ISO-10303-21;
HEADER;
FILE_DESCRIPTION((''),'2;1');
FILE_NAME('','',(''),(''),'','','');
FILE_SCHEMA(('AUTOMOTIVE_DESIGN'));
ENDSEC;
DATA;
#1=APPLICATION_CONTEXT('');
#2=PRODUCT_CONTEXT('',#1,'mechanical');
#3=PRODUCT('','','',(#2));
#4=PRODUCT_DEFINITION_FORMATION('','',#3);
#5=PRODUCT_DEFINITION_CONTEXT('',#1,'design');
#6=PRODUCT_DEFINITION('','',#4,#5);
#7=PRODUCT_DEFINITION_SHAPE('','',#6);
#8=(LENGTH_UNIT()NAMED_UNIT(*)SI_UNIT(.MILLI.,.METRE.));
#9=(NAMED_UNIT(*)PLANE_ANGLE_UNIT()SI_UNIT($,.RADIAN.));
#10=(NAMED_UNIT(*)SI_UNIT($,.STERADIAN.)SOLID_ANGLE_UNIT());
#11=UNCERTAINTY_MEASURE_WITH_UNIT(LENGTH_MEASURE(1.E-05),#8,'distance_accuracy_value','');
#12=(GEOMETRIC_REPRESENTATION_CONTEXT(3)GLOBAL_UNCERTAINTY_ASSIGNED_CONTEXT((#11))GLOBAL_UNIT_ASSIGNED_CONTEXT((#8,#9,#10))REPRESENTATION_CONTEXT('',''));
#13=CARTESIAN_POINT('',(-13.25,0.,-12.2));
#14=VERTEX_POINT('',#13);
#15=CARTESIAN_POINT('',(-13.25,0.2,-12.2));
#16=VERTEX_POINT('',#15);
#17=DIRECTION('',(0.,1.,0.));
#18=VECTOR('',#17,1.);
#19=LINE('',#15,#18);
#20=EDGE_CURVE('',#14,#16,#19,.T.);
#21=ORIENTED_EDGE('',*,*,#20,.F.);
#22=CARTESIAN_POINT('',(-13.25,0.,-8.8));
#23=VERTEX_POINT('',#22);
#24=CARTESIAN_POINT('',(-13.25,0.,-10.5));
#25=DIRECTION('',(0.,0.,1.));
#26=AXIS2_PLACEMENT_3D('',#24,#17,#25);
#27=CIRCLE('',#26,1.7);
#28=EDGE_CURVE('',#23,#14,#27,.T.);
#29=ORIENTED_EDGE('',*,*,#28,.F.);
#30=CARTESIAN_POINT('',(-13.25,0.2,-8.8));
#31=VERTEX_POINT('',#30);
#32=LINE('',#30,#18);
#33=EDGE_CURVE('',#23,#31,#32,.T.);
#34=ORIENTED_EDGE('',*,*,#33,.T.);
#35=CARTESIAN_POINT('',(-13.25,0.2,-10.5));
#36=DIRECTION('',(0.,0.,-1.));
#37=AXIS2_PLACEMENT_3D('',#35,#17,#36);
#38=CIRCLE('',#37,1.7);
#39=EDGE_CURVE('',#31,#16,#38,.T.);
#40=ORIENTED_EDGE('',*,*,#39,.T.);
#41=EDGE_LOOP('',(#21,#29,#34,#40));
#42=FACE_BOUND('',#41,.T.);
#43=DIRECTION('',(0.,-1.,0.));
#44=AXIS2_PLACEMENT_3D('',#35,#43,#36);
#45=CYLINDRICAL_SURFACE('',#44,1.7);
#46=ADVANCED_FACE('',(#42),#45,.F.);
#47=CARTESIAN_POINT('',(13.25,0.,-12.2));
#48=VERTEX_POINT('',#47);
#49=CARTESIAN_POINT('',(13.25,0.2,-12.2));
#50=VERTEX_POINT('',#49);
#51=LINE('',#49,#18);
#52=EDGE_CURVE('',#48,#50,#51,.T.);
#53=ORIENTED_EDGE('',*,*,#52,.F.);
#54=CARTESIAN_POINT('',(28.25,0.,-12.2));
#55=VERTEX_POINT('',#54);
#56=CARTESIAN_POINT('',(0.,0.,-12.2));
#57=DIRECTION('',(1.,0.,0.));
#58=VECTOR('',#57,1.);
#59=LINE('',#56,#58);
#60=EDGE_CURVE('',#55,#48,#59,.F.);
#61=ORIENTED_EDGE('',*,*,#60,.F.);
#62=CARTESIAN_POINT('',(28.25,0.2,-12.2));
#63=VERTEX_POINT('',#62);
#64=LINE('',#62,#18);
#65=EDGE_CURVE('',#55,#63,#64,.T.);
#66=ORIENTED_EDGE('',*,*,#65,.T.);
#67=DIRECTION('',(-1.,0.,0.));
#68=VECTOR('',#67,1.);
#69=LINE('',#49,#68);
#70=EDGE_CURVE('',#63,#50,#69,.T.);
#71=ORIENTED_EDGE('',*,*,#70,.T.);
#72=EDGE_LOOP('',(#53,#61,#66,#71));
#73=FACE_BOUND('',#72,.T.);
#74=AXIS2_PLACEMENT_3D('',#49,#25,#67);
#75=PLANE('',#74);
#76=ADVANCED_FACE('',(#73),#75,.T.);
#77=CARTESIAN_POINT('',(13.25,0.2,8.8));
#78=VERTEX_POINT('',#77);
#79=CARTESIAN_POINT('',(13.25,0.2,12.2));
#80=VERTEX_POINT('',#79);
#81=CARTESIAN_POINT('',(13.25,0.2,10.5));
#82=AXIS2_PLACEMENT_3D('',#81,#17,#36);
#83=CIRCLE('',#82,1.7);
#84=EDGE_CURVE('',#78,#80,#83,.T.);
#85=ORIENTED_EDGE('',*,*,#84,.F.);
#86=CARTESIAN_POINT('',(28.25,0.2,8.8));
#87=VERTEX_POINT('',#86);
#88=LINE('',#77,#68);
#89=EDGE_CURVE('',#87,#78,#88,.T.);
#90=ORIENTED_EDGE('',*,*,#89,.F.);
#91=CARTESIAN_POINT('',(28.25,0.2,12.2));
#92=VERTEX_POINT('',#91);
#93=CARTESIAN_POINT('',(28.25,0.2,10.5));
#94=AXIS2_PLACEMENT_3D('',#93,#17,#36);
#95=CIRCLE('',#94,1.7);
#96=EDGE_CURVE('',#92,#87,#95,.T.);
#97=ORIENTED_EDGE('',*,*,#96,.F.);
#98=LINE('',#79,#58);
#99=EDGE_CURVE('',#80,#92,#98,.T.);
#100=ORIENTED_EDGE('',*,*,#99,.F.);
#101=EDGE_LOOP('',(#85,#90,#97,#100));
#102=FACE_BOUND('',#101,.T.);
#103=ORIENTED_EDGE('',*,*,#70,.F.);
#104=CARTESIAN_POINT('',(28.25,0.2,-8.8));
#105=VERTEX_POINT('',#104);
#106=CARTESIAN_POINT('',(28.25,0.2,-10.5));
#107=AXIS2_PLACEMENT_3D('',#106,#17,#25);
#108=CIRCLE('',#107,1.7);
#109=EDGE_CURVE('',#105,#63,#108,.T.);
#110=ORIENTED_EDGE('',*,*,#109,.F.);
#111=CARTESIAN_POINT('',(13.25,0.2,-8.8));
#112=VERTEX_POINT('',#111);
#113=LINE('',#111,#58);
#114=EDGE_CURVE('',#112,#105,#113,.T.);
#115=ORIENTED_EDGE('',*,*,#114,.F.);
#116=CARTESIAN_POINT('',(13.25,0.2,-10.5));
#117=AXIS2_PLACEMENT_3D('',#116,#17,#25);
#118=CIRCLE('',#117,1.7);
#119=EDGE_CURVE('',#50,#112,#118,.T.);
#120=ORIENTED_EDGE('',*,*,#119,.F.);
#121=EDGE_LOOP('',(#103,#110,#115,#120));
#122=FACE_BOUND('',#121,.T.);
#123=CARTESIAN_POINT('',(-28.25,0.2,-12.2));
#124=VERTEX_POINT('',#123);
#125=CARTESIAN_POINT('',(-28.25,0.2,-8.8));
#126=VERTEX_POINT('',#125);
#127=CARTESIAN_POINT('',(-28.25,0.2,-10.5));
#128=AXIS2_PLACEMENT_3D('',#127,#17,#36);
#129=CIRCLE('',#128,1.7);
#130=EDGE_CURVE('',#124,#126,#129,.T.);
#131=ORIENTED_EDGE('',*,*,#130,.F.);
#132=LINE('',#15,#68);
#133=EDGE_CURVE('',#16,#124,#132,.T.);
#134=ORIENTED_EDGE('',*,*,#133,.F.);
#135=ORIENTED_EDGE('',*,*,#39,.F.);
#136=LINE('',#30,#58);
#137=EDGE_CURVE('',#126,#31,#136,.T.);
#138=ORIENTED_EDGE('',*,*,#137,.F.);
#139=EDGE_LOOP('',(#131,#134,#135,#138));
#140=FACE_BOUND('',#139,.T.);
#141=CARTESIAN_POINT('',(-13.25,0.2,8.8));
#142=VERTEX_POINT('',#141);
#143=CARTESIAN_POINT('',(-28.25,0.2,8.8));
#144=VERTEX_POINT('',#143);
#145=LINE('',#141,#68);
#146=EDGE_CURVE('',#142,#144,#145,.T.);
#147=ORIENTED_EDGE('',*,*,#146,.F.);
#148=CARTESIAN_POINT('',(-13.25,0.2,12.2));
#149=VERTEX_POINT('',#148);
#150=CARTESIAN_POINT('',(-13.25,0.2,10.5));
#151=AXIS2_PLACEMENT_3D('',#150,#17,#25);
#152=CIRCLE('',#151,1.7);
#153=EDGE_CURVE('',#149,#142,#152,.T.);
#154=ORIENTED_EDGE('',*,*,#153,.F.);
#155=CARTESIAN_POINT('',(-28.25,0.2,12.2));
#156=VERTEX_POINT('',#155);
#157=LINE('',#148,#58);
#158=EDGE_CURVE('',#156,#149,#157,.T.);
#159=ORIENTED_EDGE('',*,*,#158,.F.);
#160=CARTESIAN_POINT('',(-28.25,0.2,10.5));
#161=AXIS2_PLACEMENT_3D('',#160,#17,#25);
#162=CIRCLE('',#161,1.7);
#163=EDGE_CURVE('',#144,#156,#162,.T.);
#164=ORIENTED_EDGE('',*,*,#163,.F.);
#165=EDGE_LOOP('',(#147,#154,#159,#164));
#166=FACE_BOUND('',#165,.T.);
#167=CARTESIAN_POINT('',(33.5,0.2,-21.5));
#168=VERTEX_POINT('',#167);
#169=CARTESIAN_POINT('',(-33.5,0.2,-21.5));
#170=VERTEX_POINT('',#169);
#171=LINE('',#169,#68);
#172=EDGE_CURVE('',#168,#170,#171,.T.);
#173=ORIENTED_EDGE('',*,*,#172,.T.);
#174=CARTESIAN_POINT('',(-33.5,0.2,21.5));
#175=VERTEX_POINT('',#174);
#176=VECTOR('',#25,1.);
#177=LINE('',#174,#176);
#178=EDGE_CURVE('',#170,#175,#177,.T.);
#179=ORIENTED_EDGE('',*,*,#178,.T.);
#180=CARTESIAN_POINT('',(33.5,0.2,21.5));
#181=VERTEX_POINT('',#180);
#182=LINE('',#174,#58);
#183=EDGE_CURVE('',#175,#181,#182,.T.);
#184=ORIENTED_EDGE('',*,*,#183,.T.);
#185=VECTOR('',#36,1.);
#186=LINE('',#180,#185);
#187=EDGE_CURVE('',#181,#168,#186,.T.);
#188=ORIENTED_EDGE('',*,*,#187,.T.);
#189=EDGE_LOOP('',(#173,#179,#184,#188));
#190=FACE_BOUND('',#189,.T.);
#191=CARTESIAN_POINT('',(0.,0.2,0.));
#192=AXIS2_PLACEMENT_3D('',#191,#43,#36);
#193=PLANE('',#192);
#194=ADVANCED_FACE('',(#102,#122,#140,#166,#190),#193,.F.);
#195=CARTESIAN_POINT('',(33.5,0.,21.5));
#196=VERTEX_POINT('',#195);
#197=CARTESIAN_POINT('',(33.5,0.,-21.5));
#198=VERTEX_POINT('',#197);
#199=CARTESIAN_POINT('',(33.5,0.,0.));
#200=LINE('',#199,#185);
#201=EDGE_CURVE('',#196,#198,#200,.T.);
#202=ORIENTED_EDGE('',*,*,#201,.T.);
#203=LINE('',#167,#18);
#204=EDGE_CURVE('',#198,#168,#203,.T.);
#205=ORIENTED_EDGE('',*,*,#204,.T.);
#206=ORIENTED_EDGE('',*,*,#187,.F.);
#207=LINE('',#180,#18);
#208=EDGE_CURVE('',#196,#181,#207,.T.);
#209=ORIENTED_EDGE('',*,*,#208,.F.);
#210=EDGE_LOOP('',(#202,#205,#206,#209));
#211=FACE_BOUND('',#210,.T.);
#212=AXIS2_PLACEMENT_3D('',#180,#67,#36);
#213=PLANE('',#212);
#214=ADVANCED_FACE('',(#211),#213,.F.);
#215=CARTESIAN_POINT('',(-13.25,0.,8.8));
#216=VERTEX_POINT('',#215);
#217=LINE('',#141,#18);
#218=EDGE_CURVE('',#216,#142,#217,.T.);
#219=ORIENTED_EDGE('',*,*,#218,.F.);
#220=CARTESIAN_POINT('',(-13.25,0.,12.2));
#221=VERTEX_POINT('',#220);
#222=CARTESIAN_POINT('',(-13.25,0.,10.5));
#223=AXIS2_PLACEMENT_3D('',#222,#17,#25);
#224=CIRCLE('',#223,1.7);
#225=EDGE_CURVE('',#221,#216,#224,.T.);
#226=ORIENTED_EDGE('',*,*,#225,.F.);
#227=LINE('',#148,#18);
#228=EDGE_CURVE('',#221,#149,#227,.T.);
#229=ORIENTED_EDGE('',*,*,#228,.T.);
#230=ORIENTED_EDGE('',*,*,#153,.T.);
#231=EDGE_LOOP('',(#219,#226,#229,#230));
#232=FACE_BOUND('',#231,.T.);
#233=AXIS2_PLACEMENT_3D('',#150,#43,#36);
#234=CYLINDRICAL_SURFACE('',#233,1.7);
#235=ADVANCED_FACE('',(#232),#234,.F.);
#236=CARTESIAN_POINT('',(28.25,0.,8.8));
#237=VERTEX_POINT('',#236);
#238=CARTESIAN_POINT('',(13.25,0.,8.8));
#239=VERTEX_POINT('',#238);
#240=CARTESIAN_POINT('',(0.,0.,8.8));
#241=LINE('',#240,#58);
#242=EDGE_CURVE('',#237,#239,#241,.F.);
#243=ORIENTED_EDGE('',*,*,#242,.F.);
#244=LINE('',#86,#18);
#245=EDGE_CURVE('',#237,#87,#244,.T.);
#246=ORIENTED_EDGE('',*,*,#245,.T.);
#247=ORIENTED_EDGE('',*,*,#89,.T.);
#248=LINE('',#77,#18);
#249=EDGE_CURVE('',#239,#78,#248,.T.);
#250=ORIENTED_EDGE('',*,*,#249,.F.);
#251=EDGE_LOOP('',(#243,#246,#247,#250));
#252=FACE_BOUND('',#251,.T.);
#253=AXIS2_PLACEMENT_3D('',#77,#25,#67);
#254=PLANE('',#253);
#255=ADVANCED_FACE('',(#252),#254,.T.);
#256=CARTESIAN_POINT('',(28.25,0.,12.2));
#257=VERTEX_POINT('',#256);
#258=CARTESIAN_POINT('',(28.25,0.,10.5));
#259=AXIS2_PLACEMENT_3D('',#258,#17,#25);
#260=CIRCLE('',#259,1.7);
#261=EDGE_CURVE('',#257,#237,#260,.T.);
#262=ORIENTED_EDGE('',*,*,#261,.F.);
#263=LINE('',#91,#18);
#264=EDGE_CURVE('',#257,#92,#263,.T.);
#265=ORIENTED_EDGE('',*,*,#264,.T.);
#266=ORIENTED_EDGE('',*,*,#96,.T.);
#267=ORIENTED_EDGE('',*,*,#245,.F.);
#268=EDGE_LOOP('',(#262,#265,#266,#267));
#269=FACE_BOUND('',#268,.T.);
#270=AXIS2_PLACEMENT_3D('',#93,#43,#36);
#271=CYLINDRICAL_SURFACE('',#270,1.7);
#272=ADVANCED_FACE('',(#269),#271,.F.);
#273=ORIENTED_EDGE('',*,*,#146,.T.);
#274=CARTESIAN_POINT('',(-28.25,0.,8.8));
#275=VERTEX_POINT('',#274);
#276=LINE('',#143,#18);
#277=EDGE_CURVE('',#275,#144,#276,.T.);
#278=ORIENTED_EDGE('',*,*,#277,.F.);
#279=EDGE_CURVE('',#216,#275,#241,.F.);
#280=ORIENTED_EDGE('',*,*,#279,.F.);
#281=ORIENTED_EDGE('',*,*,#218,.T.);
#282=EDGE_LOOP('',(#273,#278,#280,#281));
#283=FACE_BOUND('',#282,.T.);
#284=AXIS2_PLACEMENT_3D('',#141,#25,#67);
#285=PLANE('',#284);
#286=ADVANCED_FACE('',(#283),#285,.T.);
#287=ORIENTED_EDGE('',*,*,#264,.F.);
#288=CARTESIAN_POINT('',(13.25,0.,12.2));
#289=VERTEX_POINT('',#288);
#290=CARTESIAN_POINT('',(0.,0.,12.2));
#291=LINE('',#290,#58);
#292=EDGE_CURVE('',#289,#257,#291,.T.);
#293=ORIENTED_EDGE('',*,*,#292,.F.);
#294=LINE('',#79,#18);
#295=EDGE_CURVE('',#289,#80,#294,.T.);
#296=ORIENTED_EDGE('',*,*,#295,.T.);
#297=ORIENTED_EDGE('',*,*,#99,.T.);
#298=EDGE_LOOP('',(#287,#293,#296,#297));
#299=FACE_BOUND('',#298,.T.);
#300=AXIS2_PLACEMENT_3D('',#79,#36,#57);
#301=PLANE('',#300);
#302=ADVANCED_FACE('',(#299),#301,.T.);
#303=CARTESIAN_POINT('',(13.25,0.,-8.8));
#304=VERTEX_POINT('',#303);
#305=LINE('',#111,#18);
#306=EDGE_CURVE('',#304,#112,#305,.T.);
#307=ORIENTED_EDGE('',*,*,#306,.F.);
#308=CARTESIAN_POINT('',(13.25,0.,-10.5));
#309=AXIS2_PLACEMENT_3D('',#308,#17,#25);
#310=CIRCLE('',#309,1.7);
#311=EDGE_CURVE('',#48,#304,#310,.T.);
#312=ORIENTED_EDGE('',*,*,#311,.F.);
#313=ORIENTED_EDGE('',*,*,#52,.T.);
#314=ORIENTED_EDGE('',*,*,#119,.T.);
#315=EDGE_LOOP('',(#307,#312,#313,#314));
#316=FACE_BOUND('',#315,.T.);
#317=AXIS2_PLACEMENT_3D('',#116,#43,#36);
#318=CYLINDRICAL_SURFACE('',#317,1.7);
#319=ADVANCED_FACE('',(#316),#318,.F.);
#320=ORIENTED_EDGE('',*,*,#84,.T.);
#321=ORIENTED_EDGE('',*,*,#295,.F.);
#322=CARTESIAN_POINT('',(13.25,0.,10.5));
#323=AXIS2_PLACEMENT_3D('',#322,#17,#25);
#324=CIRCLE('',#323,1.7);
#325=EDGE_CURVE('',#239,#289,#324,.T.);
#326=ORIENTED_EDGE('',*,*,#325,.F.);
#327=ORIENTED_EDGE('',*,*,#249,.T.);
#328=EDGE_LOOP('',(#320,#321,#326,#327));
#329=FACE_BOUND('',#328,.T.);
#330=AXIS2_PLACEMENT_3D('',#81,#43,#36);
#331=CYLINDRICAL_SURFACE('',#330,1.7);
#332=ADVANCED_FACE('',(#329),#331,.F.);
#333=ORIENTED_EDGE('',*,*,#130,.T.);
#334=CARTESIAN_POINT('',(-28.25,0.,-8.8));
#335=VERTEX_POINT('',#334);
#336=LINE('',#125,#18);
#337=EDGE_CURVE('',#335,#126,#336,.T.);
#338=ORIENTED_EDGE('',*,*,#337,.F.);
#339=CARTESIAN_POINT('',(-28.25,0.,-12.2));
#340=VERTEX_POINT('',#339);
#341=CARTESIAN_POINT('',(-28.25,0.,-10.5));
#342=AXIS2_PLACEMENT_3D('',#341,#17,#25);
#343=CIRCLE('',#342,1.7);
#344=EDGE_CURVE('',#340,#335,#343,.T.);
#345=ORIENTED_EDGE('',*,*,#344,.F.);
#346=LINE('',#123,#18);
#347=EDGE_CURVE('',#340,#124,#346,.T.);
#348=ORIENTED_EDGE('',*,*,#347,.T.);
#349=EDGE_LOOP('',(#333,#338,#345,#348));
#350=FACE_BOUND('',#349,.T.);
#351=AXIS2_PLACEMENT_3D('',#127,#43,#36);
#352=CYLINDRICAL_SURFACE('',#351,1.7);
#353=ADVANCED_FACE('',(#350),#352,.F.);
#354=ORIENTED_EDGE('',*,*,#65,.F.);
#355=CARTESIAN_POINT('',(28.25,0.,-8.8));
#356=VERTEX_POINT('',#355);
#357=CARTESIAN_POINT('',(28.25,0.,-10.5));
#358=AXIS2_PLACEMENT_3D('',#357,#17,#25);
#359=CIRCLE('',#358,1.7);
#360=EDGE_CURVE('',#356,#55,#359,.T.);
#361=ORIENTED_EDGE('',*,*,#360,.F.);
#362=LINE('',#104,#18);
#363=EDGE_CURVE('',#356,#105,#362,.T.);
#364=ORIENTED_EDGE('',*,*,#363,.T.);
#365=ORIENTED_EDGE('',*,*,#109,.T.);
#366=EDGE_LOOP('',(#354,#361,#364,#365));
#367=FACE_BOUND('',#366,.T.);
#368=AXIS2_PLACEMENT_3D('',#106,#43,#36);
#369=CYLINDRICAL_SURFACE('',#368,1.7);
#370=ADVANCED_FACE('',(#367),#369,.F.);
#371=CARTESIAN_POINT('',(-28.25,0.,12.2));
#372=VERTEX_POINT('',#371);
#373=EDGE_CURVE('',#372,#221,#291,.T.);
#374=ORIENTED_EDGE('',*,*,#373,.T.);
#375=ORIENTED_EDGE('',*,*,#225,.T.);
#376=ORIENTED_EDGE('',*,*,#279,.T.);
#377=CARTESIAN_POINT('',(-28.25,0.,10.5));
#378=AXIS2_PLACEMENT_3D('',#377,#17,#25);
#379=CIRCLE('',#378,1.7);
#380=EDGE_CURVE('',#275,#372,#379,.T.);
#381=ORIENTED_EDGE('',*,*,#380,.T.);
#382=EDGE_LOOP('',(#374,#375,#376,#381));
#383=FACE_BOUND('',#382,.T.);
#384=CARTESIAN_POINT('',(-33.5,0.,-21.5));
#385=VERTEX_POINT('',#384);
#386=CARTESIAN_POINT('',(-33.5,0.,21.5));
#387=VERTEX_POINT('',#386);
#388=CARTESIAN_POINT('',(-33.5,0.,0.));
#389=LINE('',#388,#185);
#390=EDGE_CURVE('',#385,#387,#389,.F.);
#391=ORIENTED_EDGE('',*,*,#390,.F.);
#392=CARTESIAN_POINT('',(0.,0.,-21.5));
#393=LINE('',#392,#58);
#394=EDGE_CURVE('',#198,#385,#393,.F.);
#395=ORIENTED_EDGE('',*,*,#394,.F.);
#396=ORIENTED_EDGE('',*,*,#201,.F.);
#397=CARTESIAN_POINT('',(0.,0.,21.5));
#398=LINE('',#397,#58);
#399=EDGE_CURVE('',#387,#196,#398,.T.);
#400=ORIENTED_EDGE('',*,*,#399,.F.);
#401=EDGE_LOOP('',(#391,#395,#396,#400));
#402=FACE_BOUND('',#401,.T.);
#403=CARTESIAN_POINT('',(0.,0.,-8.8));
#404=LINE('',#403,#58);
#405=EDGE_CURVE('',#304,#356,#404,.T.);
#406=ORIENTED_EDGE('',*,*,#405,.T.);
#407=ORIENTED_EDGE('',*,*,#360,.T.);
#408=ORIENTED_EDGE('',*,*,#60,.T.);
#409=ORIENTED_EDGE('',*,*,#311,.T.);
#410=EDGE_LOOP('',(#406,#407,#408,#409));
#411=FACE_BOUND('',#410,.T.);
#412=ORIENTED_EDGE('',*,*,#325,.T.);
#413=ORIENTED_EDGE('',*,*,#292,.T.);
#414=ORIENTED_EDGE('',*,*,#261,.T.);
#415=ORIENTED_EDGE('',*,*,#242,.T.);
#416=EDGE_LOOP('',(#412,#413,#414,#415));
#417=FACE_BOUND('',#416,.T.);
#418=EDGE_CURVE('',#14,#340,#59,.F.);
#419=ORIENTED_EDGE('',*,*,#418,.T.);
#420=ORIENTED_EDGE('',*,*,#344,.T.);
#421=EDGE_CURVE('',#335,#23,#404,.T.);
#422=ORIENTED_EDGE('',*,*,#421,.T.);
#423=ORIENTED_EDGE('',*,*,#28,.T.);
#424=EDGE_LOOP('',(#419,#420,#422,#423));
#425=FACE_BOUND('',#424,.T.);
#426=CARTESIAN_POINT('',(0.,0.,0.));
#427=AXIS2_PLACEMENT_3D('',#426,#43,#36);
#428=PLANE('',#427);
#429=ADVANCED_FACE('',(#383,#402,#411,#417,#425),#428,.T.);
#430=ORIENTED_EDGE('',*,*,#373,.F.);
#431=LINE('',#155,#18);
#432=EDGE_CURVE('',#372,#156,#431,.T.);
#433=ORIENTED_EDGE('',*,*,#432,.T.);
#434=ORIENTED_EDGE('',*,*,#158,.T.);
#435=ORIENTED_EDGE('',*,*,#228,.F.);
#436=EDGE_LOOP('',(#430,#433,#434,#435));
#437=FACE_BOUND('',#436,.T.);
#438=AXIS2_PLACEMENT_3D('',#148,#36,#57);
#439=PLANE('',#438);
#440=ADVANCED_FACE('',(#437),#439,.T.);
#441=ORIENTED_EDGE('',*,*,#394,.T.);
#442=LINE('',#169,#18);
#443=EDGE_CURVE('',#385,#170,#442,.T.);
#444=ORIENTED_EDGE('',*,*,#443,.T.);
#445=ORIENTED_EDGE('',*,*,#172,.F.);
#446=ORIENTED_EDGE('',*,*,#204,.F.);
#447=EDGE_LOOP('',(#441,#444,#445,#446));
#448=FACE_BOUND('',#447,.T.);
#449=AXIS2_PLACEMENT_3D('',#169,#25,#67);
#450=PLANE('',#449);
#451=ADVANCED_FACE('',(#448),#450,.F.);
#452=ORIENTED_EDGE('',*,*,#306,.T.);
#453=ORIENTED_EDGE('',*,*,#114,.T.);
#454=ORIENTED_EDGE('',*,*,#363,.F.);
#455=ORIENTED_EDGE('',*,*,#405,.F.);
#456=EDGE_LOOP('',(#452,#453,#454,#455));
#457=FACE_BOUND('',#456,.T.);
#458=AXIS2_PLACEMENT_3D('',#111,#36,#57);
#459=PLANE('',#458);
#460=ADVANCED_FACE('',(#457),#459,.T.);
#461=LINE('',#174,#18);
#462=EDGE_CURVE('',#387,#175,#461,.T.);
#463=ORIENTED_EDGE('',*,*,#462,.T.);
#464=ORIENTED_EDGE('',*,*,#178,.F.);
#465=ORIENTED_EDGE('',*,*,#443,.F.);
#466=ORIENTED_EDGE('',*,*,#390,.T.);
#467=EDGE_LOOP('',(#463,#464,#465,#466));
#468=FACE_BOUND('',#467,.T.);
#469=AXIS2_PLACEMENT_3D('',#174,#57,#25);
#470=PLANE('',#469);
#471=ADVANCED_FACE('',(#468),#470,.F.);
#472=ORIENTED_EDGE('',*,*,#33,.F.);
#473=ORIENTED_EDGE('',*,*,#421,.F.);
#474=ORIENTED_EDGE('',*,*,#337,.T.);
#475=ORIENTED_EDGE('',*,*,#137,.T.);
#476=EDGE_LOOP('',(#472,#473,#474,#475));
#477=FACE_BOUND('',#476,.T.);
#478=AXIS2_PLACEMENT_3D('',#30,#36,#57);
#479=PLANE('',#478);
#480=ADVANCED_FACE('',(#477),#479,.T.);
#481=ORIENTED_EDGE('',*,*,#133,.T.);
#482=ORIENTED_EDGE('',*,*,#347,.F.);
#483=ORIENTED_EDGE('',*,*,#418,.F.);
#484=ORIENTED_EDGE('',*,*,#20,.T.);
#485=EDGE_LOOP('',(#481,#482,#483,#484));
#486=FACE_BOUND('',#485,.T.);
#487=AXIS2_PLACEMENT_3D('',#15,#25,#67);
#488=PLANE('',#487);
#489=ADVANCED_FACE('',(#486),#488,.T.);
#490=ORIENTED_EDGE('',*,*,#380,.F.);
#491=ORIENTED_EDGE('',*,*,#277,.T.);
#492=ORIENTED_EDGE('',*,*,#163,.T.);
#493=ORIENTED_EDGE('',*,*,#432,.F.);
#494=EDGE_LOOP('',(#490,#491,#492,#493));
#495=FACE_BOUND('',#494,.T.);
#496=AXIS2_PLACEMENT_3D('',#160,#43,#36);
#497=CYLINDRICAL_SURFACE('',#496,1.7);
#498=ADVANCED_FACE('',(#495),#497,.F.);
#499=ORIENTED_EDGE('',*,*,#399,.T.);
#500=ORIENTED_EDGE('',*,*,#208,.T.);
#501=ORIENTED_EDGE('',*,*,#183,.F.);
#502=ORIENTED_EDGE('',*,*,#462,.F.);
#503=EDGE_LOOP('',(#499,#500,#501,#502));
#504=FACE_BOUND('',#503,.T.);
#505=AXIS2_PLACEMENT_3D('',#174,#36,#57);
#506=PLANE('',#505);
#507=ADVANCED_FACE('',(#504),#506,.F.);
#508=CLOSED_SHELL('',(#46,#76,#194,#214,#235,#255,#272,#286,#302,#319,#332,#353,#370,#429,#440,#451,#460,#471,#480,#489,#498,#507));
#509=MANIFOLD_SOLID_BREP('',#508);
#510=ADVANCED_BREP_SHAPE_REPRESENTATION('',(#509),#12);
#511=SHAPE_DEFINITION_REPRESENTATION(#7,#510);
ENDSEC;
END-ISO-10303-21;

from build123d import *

# Parameters (mm, degrees)
SKETCH1_W           = 67
SKETCH1_H           = 43
BOSS_EXTRUDE1_DEPTH = 0.2


with BuildPart() as part:
    # Sketch1 → Boss-Extrude1 (new body)
    with BuildSketch(Plane(origin=(0, 0, 0), x_dir=(1, 0, 0), z_dir=(0, 1, 0))):
        Rectangle(SKETCH1_W, SKETCH1_H)
        with BuildLine():
            Line((13.25, 12.2), (28.25, 12.2))
            ThreePointArc((28.25, 12.2), (29.95, 10.5), (28.25, 8.8))
            Line((28.25, 8.8), (13.25, 8.8))
            ThreePointArc((13.25, 8.8), (11.55, 10.5), (13.25, 12.2))
        make_face(mode=Mode.SUBTRACT)
        with BuildLine():
            Line((-13.25, 12.2), (-28.25, 12.2))
            ThreePointArc((-28.25, 12.2), (-29.95, 10.5), (-28.25, 8.8))
            Line((-28.25, 8.8), (-13.25, 8.8))
            ThreePointArc((-13.25, 8.8), (-11.55, 10.5), (-13.25, 12.2))
        make_face(mode=Mode.SUBTRACT)
        with BuildLine():
            Line((-13.25, -12.2), (-28.25, -12.2))
            ThreePointArc((-28.25, -12.2), (-29.95, -10.5), (-28.25, -8.8))
            Line((-28.25, -8.8), (-13.25, -8.8))
            ThreePointArc((-13.25, -8.8), (-11.55, -10.5), (-13.25, -12.2))
        make_face(mode=Mode.SUBTRACT)
        with BuildLine():
            Line((13.25, -12.2), (28.25, -12.2))
            ThreePointArc((28.25, -12.2), (29.95, -10.5), (28.25, -8.8))
            Line((28.25, -8.8), (13.25, -8.8))
            ThreePointArc((13.25, -8.8), (11.55, -10.5), (13.25, -12.2))
        make_face(mode=Mode.SUBTRACT)
    extrude(amount=BOSS_EXTRUDE1_DEPTH)


solid = part.part
